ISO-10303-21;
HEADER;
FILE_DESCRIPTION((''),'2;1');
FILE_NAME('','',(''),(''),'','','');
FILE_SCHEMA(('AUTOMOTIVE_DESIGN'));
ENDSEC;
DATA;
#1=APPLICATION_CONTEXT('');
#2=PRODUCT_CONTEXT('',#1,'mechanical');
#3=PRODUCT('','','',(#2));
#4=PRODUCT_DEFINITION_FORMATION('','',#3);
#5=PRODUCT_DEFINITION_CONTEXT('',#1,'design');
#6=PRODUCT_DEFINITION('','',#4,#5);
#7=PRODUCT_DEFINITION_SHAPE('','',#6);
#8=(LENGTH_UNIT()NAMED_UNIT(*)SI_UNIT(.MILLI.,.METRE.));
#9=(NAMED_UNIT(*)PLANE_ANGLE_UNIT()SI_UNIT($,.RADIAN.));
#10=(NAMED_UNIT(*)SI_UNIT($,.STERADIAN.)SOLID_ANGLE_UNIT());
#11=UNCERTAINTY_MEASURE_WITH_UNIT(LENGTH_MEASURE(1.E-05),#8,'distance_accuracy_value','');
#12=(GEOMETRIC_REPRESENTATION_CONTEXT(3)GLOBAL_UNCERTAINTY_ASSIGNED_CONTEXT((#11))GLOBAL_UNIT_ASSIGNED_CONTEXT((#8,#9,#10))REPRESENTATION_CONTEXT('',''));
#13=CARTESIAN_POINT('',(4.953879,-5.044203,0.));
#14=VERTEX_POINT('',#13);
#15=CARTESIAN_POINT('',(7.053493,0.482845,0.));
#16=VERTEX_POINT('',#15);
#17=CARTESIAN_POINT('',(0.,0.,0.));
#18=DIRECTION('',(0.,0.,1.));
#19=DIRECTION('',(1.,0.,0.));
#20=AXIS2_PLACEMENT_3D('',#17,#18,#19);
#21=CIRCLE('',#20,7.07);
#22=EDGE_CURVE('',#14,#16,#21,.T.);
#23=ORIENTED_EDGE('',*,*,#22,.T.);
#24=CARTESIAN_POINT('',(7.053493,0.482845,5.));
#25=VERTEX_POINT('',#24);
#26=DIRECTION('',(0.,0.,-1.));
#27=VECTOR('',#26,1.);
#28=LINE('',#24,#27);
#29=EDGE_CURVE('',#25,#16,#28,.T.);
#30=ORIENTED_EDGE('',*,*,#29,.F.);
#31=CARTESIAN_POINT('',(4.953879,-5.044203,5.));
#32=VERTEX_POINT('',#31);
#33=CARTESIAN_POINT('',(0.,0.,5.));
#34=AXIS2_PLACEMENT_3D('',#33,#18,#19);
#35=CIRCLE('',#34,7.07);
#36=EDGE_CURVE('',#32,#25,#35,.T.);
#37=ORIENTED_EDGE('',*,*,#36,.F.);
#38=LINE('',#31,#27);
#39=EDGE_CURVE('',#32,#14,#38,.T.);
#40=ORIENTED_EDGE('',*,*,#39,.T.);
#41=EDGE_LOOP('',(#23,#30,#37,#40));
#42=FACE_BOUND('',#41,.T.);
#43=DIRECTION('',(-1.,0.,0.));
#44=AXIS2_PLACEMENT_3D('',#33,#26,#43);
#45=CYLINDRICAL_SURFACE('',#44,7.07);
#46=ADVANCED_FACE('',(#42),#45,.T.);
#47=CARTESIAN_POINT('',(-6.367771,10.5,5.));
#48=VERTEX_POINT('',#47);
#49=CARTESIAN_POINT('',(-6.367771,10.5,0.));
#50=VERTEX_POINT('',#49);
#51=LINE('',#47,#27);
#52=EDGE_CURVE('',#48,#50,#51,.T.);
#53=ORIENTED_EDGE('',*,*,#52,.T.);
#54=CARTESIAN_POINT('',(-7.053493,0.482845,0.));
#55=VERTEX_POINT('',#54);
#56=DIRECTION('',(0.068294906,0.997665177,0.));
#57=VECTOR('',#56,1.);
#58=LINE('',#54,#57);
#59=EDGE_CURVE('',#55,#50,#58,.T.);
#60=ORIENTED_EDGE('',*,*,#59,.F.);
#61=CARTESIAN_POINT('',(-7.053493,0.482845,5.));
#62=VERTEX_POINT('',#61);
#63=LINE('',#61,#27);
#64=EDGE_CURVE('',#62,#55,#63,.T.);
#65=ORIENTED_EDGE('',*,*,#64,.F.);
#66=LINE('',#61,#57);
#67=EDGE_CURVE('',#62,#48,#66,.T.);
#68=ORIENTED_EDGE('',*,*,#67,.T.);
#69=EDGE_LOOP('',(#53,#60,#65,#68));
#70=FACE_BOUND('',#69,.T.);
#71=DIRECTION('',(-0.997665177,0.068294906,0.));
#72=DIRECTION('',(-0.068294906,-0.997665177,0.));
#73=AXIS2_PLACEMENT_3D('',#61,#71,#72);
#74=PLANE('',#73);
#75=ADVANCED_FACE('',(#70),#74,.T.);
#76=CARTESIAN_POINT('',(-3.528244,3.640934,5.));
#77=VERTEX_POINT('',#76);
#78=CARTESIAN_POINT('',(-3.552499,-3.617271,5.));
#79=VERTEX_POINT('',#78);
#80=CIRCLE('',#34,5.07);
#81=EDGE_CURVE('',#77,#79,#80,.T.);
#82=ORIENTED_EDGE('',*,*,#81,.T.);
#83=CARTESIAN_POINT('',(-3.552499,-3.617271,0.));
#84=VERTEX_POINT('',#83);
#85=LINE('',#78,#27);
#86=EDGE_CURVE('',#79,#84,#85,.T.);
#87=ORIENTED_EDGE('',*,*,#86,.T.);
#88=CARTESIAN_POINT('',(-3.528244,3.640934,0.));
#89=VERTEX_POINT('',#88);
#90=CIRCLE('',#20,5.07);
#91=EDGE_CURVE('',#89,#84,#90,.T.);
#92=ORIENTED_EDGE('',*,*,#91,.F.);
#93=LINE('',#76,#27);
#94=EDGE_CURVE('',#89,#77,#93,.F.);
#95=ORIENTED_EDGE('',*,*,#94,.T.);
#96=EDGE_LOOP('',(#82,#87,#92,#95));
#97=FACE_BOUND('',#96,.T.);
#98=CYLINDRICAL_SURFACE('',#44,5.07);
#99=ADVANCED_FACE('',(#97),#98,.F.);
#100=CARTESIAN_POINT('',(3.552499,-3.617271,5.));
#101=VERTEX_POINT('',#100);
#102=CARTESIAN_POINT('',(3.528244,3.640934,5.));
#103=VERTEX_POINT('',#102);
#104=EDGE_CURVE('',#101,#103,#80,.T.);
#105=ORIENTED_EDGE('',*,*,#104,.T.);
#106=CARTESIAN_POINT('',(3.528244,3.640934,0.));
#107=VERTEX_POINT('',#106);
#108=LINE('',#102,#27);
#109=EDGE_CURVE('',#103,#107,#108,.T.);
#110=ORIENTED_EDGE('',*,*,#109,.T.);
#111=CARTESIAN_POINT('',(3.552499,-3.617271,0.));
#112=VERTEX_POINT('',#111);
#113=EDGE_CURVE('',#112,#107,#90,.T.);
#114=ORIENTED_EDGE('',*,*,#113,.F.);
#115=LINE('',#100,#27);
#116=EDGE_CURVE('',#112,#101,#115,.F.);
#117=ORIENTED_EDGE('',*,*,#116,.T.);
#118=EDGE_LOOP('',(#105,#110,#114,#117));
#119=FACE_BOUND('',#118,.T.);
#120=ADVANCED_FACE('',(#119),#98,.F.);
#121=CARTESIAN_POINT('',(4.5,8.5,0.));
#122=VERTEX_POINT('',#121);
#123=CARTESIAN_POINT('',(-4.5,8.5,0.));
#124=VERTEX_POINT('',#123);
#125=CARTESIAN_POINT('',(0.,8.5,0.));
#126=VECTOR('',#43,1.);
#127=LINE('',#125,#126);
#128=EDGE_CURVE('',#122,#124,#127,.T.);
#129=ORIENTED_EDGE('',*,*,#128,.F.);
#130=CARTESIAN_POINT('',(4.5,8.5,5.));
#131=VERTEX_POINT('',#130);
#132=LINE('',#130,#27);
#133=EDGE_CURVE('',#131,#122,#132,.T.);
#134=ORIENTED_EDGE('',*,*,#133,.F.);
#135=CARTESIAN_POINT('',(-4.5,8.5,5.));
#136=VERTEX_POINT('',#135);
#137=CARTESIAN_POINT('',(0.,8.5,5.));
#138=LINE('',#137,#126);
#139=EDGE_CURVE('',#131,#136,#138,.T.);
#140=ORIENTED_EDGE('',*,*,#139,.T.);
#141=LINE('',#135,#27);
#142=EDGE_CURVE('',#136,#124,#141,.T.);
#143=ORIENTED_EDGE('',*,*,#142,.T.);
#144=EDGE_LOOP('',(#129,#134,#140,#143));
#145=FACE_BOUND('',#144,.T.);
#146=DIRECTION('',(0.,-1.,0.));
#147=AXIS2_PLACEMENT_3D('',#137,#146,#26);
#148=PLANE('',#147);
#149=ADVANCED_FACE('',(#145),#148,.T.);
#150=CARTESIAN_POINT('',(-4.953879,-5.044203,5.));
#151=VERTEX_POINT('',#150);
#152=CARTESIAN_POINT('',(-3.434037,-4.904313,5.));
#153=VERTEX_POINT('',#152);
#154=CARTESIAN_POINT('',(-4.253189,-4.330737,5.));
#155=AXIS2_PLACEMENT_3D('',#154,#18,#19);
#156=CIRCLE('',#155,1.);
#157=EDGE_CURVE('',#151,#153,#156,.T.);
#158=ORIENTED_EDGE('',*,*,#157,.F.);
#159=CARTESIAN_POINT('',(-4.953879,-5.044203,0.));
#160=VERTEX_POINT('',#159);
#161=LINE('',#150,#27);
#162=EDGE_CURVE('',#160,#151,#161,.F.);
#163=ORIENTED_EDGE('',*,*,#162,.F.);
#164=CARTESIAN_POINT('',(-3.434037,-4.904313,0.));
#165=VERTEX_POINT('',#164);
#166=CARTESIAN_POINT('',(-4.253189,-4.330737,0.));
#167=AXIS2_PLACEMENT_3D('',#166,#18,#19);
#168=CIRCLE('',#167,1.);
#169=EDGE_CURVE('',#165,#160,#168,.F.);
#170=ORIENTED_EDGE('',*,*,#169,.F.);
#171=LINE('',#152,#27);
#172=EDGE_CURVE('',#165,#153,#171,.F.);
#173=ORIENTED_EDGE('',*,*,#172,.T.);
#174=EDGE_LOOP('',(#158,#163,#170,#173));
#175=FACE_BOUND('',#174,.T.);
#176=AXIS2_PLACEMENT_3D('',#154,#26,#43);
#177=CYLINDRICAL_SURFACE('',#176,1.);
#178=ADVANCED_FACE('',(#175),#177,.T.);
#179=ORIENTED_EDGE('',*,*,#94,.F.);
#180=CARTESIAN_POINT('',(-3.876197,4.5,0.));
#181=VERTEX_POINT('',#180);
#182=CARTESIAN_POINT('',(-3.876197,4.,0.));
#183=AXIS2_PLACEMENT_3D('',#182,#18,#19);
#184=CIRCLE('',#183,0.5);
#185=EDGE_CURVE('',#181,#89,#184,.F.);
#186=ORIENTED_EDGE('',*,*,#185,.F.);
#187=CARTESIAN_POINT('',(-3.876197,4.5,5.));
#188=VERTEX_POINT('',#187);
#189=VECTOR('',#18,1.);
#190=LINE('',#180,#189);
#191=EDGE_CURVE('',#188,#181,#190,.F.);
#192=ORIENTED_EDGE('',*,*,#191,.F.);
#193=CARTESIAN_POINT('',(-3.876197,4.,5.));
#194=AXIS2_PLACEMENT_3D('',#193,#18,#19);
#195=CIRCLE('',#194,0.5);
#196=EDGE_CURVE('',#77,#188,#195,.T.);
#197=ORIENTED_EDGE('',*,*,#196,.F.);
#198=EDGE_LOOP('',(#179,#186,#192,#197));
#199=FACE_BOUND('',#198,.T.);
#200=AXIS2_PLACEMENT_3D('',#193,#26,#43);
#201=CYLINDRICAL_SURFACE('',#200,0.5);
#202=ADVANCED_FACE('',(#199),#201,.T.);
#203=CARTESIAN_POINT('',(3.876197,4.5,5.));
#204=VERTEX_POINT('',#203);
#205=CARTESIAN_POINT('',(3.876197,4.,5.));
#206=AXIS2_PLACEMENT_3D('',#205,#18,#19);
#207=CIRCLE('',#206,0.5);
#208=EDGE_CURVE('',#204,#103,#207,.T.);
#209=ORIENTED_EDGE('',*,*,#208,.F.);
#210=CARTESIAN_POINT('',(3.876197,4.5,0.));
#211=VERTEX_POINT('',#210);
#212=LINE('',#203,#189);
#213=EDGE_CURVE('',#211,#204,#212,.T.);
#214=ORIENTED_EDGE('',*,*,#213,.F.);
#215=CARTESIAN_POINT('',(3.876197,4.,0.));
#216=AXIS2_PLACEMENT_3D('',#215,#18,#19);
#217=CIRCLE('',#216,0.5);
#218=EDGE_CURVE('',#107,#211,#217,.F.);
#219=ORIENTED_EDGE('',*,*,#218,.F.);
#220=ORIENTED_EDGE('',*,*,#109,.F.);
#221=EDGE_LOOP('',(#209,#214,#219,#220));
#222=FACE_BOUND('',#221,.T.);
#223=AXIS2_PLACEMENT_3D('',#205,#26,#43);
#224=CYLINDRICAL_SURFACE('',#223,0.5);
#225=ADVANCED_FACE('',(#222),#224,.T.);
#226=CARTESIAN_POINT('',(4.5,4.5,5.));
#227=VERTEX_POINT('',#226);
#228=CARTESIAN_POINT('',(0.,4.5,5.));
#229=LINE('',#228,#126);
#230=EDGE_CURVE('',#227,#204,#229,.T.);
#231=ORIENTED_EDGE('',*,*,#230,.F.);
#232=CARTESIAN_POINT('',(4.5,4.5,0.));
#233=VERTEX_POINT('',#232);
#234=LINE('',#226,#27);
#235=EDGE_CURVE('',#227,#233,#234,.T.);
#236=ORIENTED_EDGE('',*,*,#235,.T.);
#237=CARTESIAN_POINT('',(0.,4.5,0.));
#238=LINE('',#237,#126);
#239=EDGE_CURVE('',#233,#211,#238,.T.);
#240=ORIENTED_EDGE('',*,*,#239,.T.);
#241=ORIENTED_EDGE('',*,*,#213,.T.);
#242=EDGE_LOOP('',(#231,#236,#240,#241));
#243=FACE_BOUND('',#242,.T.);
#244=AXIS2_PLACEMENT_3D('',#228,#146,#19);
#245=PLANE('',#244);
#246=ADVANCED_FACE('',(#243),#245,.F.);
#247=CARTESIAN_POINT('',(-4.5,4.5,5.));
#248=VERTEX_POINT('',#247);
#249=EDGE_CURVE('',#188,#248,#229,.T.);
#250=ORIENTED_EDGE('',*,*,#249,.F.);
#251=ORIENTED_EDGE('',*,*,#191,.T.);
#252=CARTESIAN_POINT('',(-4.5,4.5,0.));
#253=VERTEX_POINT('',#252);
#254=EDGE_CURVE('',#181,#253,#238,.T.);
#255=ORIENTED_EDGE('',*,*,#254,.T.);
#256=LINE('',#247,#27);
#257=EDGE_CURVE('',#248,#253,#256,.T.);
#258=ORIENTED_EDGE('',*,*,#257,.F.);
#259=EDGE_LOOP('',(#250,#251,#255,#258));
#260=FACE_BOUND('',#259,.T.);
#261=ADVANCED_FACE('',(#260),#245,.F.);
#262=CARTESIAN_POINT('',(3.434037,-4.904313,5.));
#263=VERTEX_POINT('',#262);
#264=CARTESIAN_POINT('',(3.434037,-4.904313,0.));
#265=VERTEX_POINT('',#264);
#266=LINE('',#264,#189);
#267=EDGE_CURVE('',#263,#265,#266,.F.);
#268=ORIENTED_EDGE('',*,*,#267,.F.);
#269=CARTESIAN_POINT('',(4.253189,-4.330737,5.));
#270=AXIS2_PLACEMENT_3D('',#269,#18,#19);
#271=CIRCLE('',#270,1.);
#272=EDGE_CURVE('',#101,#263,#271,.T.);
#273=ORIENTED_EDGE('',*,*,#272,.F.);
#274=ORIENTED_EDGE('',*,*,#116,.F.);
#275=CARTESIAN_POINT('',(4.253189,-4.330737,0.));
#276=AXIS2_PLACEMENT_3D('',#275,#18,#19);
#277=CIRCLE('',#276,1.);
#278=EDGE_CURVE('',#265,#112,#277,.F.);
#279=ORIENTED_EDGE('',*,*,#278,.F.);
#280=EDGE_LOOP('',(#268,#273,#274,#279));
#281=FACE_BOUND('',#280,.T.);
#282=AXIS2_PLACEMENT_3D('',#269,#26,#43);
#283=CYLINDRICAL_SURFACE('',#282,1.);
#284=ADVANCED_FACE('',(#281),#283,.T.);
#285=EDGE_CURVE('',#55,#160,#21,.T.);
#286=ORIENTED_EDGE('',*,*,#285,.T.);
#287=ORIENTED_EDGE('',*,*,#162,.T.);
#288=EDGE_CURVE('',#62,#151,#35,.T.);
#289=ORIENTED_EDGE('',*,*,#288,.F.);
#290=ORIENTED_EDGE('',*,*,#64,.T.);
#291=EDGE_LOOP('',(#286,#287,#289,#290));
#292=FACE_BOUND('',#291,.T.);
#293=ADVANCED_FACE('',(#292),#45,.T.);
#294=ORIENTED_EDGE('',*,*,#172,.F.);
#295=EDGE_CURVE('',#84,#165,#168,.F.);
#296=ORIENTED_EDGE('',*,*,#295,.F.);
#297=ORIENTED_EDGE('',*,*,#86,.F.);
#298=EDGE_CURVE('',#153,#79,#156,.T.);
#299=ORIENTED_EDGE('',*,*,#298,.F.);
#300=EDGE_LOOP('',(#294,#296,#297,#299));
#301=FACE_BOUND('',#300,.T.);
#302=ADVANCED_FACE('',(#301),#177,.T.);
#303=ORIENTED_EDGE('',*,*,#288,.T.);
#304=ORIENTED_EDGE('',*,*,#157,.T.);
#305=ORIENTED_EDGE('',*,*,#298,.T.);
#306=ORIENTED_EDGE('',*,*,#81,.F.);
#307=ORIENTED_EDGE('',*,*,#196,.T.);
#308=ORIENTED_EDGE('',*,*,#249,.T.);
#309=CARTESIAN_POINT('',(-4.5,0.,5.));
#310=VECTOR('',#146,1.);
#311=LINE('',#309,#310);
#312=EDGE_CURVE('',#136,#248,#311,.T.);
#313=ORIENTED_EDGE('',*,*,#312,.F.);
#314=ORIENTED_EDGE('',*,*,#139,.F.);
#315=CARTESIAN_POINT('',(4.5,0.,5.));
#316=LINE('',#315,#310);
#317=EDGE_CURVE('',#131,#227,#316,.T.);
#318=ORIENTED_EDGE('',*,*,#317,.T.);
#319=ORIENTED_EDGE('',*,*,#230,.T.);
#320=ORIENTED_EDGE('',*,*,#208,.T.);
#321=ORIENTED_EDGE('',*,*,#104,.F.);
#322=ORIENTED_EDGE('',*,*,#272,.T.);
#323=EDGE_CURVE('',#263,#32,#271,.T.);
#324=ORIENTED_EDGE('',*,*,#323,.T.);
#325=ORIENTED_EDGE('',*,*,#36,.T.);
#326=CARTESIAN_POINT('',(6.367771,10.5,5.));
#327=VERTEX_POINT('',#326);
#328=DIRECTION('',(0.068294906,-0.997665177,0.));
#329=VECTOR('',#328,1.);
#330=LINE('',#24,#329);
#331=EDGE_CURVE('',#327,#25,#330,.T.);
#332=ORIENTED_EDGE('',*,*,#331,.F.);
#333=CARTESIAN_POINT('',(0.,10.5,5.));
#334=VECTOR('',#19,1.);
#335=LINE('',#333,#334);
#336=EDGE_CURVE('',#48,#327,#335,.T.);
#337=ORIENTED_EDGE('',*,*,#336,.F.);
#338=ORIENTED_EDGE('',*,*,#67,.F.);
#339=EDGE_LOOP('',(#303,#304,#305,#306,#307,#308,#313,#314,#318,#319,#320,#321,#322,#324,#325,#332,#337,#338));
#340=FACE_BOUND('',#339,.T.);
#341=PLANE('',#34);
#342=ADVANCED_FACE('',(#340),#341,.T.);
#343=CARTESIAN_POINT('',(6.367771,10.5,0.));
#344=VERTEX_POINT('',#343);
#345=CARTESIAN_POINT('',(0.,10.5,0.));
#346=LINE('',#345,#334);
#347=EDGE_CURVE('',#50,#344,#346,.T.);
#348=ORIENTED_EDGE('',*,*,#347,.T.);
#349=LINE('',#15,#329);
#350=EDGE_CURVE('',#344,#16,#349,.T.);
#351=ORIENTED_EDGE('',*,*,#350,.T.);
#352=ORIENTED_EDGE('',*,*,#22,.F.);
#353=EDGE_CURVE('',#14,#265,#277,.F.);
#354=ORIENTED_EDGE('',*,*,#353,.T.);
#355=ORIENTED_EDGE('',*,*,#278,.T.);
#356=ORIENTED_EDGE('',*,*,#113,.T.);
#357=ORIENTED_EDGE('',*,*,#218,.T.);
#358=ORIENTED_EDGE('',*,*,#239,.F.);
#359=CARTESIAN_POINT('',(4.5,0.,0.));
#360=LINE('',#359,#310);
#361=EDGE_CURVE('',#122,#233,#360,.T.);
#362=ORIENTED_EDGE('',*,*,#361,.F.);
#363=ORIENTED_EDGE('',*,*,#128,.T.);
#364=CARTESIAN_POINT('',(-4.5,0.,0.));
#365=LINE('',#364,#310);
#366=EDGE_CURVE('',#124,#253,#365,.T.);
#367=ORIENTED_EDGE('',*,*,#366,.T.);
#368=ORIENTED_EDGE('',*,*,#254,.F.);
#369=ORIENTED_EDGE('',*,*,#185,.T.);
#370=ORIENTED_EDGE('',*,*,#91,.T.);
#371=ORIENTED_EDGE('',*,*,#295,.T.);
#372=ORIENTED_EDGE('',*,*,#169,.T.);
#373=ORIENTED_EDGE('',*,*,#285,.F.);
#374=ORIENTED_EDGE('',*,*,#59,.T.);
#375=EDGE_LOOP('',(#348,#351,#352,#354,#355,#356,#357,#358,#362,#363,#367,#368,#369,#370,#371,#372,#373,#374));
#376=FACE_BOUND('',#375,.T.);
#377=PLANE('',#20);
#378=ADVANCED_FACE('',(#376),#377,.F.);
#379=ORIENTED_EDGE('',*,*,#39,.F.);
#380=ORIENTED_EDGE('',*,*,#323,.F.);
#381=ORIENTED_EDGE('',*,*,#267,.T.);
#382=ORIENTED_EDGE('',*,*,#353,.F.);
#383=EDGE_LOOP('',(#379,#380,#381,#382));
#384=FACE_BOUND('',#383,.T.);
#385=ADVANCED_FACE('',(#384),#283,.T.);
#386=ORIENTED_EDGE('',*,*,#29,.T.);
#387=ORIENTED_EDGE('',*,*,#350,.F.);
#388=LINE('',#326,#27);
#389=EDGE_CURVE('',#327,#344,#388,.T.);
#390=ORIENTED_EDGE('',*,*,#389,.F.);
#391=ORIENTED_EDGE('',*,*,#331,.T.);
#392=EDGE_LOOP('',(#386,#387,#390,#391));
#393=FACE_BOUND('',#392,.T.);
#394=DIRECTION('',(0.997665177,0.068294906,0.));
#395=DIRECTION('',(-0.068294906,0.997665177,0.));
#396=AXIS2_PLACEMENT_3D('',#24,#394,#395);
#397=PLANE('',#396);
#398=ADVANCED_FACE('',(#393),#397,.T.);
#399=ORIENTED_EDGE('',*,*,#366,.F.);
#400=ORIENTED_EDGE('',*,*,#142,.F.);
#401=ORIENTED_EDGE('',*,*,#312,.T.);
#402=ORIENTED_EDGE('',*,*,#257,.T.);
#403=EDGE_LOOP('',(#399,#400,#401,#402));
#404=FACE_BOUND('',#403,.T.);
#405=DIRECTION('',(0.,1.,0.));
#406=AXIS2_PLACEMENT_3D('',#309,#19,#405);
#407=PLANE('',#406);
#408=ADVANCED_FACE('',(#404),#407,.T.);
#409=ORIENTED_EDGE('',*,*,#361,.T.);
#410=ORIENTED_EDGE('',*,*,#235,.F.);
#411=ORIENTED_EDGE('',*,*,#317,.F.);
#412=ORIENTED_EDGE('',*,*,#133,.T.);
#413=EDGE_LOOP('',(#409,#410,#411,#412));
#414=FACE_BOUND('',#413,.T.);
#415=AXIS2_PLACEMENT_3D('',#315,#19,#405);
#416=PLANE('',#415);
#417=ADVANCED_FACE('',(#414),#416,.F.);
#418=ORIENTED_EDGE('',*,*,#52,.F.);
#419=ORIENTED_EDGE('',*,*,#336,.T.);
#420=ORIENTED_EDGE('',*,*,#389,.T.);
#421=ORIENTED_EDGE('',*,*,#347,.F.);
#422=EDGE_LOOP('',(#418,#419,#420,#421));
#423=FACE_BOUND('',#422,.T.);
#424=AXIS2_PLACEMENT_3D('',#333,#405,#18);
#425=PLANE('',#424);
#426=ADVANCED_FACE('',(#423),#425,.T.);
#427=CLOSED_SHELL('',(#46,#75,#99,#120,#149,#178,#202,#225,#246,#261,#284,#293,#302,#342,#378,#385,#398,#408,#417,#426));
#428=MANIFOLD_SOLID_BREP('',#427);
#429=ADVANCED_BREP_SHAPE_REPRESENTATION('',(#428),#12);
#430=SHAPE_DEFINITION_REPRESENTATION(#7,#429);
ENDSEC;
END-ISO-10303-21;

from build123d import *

# Parameters (mm, degrees)
BOSS_EXTRUDE1_DEPTH = 5
FILLET1_R           = 1
FILLET3_R           = 0.5


with BuildPart() as part:
    # Sketch1 → Boss-Extrude1 (new body)
    with BuildSketch(Plane.XY):
        with BuildLine():
            Line((-6.367771102, 10.5), (-7.053492803, 0.482844987))
            ThreePointArc((-7.053492803, 0.482844987), (-6.379046634, -3.048387121), (-4.055185405, -5.791404953))
            Line((-4.055185405, -5.791404953), (-2.908032532, -4.153100865))
            ThreePointArc((-2.908032532, -4.153100865), (-5.058941361, 0.334682398), (-2.335572735, 4.5))
            Line((-2.335572735, 4.5), (-4.5, 4.5))
            Line((-4.5, 4.5), (-4.5, 8.5))
            Line((-4.5, 8.5), (4.5, 8.5))
            Line((4.5, 8.5), (4.5, 4.5))
            Line((4.5, 4.5), (2.335572735, 4.5))
            ThreePointArc((2.335572735, 4.5), (4.332796658, 2.63282607), (5.07, 0))
            ThreePointArc((5.07, 0), (4.497144924, -2.341065469), (2.908032532, -4.153100865))
            Line((2.908032532, -4.153100865), (4.055185405, -5.791404953))
            ThreePointArc((4.055185405, -5.791404953), (6.379046634, -3.048387121), (7.053492803, 0.482844987))
            Line((7.053492803, 0.482844987), (6.367771102, 10.5))
            Line((6.367771102, 10.5), (-6.367771102, 10.5))
        make_face()
    extrude(amount=BOSS_EXTRUDE1_DEPTH)

    # Fillet1
    fillet1_edges = [part.edges().sort_by_distance(p)[0] for p in [
        (4.055185405, -5.791404953, 2.5),
        (2.908032532, -4.153100865, 2.5),
        (-4.055185405, -5.791404953, 2.5),
        (-2.908032532, -4.153100865, 2.5),
    ]]
    fillet(fillet1_edges, radius=FILLET1_R - 0.0001)  # a hair under: the kernel refuses the full size

    # Fillet3
    fillet3_edges = [part.edges().sort_by_distance(p)[0] for p in [
        (2.335572735, 4.5, 2.5),
        (-2.335572735, 4.5, 2.5),
    ]]
    fillet(fillet3_edges, radius=FILLET3_R)


solid = part.part
